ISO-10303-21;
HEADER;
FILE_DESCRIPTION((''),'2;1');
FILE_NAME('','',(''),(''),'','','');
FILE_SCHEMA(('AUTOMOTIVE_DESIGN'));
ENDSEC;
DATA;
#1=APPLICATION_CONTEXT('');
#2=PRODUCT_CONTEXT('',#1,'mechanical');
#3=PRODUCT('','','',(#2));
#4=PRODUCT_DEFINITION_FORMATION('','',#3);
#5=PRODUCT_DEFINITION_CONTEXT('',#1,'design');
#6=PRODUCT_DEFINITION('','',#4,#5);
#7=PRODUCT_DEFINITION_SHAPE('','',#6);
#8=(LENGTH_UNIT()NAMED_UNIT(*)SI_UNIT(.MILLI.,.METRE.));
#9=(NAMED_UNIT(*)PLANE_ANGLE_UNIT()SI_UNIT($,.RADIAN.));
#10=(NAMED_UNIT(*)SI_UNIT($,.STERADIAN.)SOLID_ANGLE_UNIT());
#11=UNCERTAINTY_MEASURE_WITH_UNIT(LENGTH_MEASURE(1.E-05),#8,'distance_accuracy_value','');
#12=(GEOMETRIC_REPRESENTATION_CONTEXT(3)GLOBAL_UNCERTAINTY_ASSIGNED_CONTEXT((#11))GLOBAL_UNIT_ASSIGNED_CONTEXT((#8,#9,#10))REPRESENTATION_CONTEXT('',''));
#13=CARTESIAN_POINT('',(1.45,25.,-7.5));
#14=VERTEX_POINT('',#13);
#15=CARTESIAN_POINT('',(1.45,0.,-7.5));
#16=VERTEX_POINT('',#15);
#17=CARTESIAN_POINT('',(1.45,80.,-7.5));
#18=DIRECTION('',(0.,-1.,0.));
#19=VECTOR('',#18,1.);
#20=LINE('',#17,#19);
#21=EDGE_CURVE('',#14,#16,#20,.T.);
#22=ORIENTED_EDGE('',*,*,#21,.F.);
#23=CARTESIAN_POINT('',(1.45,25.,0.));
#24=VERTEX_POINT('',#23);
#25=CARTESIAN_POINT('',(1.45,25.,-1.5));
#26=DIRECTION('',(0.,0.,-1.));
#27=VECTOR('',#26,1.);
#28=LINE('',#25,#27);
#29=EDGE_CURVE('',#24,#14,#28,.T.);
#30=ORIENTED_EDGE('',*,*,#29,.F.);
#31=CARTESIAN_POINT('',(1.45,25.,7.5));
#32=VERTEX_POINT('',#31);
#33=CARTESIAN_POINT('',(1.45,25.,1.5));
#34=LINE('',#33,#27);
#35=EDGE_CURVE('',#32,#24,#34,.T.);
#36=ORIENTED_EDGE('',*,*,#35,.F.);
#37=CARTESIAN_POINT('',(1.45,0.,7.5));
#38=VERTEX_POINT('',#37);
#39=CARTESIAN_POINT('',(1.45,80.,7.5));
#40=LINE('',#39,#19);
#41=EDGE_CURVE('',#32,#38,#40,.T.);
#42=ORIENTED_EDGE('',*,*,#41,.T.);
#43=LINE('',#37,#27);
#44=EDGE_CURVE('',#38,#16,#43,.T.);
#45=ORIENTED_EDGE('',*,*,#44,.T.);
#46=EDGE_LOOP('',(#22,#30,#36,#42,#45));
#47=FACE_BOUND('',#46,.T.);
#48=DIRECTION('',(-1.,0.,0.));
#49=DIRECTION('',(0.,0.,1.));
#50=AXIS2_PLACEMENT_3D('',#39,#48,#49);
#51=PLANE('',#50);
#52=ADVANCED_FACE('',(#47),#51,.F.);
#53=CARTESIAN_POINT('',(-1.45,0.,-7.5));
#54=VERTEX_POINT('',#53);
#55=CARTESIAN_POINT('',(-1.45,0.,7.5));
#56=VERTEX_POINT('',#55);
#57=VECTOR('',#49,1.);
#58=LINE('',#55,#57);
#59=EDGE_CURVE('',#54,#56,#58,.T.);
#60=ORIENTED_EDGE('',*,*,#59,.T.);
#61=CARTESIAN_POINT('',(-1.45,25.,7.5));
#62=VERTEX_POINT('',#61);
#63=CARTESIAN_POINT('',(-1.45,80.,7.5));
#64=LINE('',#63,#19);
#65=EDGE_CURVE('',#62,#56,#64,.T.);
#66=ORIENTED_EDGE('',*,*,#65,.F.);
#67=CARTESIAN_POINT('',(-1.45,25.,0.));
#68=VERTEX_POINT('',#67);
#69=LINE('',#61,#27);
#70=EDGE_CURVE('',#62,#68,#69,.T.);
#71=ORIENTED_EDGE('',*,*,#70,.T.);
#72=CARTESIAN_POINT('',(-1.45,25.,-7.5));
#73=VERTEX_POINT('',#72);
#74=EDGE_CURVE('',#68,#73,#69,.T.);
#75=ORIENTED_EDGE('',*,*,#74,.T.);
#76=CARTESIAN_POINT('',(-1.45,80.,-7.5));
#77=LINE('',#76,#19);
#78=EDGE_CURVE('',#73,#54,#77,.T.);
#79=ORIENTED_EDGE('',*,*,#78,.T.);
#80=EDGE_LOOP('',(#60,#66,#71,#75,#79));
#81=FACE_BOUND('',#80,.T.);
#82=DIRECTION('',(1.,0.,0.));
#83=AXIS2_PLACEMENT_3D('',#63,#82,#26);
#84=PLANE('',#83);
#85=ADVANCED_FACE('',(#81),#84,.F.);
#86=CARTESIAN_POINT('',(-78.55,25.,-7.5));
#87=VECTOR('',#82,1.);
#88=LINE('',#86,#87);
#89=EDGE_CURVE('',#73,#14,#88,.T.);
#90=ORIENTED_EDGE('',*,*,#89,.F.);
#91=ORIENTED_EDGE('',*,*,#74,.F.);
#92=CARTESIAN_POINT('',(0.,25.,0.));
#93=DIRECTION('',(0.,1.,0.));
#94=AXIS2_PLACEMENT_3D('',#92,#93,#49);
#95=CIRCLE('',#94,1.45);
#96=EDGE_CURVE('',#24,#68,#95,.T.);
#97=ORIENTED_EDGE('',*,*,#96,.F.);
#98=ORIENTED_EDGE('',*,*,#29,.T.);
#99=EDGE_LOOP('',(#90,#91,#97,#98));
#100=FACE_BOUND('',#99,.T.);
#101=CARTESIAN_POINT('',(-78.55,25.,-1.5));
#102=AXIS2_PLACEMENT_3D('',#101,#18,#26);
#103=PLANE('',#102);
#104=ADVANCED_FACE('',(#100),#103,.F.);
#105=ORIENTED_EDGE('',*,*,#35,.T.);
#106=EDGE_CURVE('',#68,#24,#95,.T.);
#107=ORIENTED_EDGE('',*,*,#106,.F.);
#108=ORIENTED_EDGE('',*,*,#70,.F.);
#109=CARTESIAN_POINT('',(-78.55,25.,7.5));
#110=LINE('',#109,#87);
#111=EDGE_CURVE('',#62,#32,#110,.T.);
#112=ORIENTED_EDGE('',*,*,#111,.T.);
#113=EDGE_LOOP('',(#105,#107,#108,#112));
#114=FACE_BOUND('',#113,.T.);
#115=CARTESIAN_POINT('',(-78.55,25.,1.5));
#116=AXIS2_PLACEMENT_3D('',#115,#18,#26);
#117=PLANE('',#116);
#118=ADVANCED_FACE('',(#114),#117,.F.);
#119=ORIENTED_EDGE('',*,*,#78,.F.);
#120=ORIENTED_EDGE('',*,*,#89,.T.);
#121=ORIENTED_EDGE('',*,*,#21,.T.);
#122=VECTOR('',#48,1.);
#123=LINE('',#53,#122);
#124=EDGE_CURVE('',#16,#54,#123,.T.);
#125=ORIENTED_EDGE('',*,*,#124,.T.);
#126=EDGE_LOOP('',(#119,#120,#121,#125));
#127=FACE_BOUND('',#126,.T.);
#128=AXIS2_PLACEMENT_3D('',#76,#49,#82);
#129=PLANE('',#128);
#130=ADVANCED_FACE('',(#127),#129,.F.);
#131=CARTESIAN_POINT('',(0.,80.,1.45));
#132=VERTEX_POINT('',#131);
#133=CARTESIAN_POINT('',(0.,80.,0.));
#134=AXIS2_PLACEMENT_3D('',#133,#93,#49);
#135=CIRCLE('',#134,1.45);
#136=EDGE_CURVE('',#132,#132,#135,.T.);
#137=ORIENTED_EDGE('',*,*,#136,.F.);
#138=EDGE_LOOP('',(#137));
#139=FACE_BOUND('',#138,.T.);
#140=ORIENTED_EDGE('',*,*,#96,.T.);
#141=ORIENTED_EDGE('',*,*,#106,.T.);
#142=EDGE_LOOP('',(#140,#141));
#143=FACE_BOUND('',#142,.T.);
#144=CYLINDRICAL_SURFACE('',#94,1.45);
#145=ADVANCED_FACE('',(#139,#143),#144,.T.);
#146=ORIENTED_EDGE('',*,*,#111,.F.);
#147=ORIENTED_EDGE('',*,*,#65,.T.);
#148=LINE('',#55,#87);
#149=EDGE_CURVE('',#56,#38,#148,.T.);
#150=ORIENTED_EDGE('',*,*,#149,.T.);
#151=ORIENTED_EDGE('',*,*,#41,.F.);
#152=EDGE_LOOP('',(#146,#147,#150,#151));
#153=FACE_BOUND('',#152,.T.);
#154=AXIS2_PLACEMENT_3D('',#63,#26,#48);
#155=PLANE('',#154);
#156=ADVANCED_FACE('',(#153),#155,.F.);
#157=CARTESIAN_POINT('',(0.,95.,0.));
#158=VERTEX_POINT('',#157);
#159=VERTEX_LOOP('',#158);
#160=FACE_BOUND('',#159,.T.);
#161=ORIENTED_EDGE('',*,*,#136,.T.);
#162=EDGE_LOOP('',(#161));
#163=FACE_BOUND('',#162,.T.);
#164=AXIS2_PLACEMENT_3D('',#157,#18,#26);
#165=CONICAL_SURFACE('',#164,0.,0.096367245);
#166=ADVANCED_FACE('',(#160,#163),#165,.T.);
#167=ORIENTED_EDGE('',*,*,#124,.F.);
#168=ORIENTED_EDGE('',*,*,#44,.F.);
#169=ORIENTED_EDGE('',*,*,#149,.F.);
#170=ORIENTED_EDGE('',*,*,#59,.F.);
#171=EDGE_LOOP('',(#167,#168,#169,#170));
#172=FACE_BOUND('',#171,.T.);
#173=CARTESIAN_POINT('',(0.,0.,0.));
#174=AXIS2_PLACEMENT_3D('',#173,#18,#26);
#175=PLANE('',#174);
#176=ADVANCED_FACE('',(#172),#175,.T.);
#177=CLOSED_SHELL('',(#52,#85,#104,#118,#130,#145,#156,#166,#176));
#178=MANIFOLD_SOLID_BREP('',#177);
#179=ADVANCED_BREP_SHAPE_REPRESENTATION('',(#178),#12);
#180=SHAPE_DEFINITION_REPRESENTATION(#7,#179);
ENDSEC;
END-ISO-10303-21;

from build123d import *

# Parameters (mm, degrees)
SKETCH1_W           = 2.9
SKETCH1_H           = 15
BOSS_EXTRUDE1_DEPTH = 80
SKETCH2_W           = 6
SKETCH2_H           = 55
CUT_EXTRUDE1_DEPTH  = 80
CUT_EXTRUDE4_DEPTH  = 55


# Read off the part's stored shape, not the designer's step: Loft2
with BuildPart() as part:
    # Sketch1 → Boss-Extrude1 (new body)
    with BuildSketch(Plane(origin=(0, 0, 0), x_dir=(1, 0, 0), z_dir=(0, 1, 0))):
        Rectangle(SKETCH1_W, SKETCH1_H)
    extrude(amount=BOSS_EXTRUDE1_DEPTH)

    # Sketch2 → Cut-Extrude1 (cut)
    with BuildSketch(Plane(origin=(1.45, 0, 0), x_dir=(0, 0, -1), z_dir=(1, 0, 0))):
        with Locations((-4.5, 52.5)):
            Rectangle(SKETCH2_W, SKETCH2_H)
        with Locations((4.5, 52.5)):
            Rectangle(SKETCH2_W, SKETCH2_H)
    extrude(amount=-CUT_EXTRUDE1_DEPTH, mode=Mode.SUBTRACT)

    # Sketch3 → Cut-Extrude4 (cut)
    with BuildSketch(Plane(origin=(0, 80, 0), x_dir=(1, 0, 0), z_dir=(0, 1, 0))):
        with BuildLine():
            Line((-1.45, 1.5), (-1.45, 5e-09))
            ThreePointArc((-1.45, 5e-09), (3e-09, 1.45), (1.45, 0))
            Line((1.45, 0), (1.45, 1.5))
            Line((1.45, 1.5), (-1.45, 1.5))
        make_face()
        with BuildLine():
            Line((-1.45, 5e-09), (-1.45, -1.5))
            Line((-1.45, -1.5), (1.45, -1.5))
            Line((1.45, -1.5), (1.45, 0))
            ThreePointArc((1.45, 0), (-3e-09, -1.45), (-1.45, 5e-09))
        make_face()
    extrude(amount=-CUT_EXTRUDE4_DEPTH, mode=Mode.SUBTRACT)

    # Loft2 outline → Loft2 (revolve)
    with BuildSketch(Plane.XY):
        Polygon((1.45, 80), (0, 95), (0, 80), align=None)
    revolve(axis=Axis((0, 0, 0), (0, 1, 0)))


solid = part.part
